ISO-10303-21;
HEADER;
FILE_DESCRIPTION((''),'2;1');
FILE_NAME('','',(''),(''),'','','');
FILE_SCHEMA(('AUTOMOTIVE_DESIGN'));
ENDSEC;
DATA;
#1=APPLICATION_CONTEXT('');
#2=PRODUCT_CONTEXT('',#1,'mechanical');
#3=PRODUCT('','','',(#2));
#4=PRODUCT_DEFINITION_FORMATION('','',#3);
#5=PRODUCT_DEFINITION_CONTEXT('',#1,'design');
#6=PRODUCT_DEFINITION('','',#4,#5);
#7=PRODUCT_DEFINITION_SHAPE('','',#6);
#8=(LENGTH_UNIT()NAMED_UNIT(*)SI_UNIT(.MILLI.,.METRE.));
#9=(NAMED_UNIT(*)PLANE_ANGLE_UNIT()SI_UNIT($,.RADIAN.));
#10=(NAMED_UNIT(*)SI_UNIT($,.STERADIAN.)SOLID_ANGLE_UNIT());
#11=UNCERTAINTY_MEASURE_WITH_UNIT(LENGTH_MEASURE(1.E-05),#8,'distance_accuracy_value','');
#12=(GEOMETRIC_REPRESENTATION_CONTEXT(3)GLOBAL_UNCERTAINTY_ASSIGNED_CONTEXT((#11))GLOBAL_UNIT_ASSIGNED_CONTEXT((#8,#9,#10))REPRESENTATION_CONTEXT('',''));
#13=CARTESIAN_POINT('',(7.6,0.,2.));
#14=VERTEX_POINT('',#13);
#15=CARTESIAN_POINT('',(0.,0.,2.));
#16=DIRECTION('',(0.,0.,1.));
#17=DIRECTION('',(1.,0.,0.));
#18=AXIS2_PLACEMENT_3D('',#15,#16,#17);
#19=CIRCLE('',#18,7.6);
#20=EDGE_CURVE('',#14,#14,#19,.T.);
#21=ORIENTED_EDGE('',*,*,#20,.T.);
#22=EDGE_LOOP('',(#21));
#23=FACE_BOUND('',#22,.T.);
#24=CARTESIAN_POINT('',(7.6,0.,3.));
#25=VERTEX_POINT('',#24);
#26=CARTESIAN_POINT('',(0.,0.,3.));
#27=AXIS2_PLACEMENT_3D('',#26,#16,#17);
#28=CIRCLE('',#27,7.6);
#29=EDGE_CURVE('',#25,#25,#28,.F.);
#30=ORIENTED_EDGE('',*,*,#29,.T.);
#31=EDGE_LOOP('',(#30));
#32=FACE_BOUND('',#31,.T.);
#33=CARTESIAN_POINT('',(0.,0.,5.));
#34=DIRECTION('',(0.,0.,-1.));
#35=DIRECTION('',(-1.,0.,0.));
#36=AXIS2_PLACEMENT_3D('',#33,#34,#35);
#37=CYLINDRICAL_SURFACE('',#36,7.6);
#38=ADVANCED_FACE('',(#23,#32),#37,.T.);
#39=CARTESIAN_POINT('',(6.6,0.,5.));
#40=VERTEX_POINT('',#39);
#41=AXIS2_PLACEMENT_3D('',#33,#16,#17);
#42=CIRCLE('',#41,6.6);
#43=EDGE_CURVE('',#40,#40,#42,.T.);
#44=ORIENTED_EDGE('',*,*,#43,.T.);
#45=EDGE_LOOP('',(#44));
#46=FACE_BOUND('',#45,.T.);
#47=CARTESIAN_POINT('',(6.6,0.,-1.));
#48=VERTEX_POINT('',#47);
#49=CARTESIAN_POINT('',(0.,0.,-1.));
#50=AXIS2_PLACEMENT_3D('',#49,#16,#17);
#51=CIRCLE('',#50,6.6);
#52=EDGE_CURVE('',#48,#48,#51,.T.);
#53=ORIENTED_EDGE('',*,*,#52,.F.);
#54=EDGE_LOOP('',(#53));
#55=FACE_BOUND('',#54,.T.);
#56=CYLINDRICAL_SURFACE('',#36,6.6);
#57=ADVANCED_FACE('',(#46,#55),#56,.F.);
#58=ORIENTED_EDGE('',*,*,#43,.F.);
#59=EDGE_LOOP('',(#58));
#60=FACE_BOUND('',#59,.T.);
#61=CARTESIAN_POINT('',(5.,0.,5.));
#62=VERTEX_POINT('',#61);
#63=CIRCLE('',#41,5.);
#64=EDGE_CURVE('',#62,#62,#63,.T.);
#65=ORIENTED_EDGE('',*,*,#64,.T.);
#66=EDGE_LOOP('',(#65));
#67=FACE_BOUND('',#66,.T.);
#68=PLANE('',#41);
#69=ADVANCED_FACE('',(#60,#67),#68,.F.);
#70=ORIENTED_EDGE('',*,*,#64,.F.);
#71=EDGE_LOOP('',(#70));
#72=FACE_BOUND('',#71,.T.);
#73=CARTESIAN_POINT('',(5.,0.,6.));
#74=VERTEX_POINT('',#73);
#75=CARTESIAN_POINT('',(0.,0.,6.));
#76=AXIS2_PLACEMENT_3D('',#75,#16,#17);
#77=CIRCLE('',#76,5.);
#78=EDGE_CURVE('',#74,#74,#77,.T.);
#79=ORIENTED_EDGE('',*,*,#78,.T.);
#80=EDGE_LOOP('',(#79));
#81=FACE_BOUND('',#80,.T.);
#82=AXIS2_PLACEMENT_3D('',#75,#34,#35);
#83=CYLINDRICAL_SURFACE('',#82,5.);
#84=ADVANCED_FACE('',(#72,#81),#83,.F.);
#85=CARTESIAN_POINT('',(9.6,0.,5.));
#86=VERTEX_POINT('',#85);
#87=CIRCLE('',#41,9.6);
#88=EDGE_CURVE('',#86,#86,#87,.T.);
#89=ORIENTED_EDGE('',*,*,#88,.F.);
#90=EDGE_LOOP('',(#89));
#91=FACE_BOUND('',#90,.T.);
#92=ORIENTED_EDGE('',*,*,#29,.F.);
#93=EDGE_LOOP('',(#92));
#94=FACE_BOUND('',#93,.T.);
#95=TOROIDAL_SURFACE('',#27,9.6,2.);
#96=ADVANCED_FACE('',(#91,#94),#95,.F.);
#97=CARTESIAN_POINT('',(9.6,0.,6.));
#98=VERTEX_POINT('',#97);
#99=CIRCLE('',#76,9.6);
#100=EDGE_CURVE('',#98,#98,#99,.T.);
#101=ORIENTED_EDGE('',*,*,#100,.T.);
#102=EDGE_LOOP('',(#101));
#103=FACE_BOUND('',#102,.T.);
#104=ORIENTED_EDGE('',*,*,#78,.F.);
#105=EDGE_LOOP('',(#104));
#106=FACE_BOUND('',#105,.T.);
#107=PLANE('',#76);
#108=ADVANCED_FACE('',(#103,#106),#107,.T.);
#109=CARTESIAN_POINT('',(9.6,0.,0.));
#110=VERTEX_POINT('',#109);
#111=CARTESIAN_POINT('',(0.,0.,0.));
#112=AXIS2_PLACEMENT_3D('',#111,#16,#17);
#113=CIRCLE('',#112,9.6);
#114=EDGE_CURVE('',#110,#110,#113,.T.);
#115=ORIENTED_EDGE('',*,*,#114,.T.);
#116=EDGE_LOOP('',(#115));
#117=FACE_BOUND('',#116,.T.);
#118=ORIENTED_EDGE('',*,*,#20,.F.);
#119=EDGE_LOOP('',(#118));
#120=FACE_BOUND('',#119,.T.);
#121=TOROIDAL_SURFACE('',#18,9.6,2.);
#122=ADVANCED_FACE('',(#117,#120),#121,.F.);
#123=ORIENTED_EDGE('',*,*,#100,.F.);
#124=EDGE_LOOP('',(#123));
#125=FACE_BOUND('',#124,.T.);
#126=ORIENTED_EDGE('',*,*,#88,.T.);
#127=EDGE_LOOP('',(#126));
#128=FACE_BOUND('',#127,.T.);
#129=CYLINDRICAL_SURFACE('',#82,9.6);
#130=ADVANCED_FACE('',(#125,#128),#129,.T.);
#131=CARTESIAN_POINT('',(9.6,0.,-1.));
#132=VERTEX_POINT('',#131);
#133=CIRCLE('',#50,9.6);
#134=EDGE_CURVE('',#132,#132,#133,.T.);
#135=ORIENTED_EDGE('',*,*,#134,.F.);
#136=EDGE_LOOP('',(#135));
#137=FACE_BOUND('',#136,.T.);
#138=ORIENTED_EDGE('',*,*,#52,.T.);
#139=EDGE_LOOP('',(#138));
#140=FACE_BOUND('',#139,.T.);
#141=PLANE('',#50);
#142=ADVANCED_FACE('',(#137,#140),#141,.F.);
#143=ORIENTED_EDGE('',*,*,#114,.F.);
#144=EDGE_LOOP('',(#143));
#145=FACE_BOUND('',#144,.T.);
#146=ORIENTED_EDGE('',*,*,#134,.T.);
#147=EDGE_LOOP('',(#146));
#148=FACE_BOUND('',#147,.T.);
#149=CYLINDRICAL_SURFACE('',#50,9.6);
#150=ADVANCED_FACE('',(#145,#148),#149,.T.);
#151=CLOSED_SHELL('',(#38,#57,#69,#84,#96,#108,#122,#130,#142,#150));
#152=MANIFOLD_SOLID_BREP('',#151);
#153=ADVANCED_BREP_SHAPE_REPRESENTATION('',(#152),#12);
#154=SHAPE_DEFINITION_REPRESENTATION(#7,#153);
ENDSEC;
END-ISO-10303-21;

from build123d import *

# Parameters (mm, degrees)
CROQUIS1_R              = 7.6
CROQUIS1_R_2            = 6.6
SALIENTE_EXTRUIR1_DEPTH = 5
CROQUIS3_R              = 9.6
CROQUIS3_R_2            = 7.6
CROQUIS3_R_3            = 6.6
CROQUIS3_R_4            = 5
SALIENTE_EXTRUIR2_DEPTH = 1
BOSS_EXTRUDE1_START     = -6
CROQUIS3_4_R            = 9.6
CROQUIS3_4_R_2          = 7.6
CROQUIS3_4_R_3          = 6.6
BOSS_EXTRUDE1_DEPTH     = 1
REDONDEO1_R             = 2


with BuildPart() as part:
    # Croquis1 → Saliente-Extruir1 (new body)
    with BuildSketch(Plane.XY):
        Circle(CROQUIS1_R)
        Circle(CROQUIS1_R_2, mode=Mode.SUBTRACT)
    extrude(amount=SALIENTE_EXTRUIR1_DEPTH)

    # Croquis3 → Saliente-Extruir2 (add)
    # profile 1 of 3: a face of its own
    with BuildSketch(Plane.XY.offset(5)):
        Circle(CROQUIS3_R)
        Circle(CROQUIS3_R_2, mode=Mode.SUBTRACT)
    # profile 2 of 3: a face of its own
    with BuildSketch(Plane.XY.offset(5)):
        Circle(CROQUIS3_R_2)
        Circle(CROQUIS3_R_3, mode=Mode.SUBTRACT)
    # profile 3 of 3: a face of its own
    with BuildSketch(Plane.XY.offset(5)):
        Circle(CROQUIS3_R_3)
        Circle(CROQUIS3_R_4, mode=Mode.SUBTRACT)
    extrude(amount=SALIENTE_EXTRUIR2_DEPTH)

    # Croquis3<4> → Boss-Extrude1 (add)
    # profile 1 of 2: a face of its own
    with BuildSketch(Plane.XY.offset(5).offset(BOSS_EXTRUDE1_START)):
        Circle(CROQUIS3_4_R)
        Circle(CROQUIS3_4_R_2, mode=Mode.SUBTRACT)
    # profile 2 of 2: a face of its own
    with BuildSketch(Plane.XY.offset(5).offset(BOSS_EXTRUDE1_START)):
        Circle(CROQUIS3_4_R_2)
        Circle(CROQUIS3_4_R_3, mode=Mode.SUBTRACT)
    extrude(amount=BOSS_EXTRUDE1_DEPTH)

    # Redondeo1
    redondeo1_edges = [part.edges().sort_by_distance(p)[0] for p in [
        (-7.6, 0, 0),
        (-7.6, 0, 5),
    ]]
    fillet(redondeo1_edges, radius=REDONDEO1_R - 0.0001)  # a hair under: the kernel refuses the full size


solid = part.part
